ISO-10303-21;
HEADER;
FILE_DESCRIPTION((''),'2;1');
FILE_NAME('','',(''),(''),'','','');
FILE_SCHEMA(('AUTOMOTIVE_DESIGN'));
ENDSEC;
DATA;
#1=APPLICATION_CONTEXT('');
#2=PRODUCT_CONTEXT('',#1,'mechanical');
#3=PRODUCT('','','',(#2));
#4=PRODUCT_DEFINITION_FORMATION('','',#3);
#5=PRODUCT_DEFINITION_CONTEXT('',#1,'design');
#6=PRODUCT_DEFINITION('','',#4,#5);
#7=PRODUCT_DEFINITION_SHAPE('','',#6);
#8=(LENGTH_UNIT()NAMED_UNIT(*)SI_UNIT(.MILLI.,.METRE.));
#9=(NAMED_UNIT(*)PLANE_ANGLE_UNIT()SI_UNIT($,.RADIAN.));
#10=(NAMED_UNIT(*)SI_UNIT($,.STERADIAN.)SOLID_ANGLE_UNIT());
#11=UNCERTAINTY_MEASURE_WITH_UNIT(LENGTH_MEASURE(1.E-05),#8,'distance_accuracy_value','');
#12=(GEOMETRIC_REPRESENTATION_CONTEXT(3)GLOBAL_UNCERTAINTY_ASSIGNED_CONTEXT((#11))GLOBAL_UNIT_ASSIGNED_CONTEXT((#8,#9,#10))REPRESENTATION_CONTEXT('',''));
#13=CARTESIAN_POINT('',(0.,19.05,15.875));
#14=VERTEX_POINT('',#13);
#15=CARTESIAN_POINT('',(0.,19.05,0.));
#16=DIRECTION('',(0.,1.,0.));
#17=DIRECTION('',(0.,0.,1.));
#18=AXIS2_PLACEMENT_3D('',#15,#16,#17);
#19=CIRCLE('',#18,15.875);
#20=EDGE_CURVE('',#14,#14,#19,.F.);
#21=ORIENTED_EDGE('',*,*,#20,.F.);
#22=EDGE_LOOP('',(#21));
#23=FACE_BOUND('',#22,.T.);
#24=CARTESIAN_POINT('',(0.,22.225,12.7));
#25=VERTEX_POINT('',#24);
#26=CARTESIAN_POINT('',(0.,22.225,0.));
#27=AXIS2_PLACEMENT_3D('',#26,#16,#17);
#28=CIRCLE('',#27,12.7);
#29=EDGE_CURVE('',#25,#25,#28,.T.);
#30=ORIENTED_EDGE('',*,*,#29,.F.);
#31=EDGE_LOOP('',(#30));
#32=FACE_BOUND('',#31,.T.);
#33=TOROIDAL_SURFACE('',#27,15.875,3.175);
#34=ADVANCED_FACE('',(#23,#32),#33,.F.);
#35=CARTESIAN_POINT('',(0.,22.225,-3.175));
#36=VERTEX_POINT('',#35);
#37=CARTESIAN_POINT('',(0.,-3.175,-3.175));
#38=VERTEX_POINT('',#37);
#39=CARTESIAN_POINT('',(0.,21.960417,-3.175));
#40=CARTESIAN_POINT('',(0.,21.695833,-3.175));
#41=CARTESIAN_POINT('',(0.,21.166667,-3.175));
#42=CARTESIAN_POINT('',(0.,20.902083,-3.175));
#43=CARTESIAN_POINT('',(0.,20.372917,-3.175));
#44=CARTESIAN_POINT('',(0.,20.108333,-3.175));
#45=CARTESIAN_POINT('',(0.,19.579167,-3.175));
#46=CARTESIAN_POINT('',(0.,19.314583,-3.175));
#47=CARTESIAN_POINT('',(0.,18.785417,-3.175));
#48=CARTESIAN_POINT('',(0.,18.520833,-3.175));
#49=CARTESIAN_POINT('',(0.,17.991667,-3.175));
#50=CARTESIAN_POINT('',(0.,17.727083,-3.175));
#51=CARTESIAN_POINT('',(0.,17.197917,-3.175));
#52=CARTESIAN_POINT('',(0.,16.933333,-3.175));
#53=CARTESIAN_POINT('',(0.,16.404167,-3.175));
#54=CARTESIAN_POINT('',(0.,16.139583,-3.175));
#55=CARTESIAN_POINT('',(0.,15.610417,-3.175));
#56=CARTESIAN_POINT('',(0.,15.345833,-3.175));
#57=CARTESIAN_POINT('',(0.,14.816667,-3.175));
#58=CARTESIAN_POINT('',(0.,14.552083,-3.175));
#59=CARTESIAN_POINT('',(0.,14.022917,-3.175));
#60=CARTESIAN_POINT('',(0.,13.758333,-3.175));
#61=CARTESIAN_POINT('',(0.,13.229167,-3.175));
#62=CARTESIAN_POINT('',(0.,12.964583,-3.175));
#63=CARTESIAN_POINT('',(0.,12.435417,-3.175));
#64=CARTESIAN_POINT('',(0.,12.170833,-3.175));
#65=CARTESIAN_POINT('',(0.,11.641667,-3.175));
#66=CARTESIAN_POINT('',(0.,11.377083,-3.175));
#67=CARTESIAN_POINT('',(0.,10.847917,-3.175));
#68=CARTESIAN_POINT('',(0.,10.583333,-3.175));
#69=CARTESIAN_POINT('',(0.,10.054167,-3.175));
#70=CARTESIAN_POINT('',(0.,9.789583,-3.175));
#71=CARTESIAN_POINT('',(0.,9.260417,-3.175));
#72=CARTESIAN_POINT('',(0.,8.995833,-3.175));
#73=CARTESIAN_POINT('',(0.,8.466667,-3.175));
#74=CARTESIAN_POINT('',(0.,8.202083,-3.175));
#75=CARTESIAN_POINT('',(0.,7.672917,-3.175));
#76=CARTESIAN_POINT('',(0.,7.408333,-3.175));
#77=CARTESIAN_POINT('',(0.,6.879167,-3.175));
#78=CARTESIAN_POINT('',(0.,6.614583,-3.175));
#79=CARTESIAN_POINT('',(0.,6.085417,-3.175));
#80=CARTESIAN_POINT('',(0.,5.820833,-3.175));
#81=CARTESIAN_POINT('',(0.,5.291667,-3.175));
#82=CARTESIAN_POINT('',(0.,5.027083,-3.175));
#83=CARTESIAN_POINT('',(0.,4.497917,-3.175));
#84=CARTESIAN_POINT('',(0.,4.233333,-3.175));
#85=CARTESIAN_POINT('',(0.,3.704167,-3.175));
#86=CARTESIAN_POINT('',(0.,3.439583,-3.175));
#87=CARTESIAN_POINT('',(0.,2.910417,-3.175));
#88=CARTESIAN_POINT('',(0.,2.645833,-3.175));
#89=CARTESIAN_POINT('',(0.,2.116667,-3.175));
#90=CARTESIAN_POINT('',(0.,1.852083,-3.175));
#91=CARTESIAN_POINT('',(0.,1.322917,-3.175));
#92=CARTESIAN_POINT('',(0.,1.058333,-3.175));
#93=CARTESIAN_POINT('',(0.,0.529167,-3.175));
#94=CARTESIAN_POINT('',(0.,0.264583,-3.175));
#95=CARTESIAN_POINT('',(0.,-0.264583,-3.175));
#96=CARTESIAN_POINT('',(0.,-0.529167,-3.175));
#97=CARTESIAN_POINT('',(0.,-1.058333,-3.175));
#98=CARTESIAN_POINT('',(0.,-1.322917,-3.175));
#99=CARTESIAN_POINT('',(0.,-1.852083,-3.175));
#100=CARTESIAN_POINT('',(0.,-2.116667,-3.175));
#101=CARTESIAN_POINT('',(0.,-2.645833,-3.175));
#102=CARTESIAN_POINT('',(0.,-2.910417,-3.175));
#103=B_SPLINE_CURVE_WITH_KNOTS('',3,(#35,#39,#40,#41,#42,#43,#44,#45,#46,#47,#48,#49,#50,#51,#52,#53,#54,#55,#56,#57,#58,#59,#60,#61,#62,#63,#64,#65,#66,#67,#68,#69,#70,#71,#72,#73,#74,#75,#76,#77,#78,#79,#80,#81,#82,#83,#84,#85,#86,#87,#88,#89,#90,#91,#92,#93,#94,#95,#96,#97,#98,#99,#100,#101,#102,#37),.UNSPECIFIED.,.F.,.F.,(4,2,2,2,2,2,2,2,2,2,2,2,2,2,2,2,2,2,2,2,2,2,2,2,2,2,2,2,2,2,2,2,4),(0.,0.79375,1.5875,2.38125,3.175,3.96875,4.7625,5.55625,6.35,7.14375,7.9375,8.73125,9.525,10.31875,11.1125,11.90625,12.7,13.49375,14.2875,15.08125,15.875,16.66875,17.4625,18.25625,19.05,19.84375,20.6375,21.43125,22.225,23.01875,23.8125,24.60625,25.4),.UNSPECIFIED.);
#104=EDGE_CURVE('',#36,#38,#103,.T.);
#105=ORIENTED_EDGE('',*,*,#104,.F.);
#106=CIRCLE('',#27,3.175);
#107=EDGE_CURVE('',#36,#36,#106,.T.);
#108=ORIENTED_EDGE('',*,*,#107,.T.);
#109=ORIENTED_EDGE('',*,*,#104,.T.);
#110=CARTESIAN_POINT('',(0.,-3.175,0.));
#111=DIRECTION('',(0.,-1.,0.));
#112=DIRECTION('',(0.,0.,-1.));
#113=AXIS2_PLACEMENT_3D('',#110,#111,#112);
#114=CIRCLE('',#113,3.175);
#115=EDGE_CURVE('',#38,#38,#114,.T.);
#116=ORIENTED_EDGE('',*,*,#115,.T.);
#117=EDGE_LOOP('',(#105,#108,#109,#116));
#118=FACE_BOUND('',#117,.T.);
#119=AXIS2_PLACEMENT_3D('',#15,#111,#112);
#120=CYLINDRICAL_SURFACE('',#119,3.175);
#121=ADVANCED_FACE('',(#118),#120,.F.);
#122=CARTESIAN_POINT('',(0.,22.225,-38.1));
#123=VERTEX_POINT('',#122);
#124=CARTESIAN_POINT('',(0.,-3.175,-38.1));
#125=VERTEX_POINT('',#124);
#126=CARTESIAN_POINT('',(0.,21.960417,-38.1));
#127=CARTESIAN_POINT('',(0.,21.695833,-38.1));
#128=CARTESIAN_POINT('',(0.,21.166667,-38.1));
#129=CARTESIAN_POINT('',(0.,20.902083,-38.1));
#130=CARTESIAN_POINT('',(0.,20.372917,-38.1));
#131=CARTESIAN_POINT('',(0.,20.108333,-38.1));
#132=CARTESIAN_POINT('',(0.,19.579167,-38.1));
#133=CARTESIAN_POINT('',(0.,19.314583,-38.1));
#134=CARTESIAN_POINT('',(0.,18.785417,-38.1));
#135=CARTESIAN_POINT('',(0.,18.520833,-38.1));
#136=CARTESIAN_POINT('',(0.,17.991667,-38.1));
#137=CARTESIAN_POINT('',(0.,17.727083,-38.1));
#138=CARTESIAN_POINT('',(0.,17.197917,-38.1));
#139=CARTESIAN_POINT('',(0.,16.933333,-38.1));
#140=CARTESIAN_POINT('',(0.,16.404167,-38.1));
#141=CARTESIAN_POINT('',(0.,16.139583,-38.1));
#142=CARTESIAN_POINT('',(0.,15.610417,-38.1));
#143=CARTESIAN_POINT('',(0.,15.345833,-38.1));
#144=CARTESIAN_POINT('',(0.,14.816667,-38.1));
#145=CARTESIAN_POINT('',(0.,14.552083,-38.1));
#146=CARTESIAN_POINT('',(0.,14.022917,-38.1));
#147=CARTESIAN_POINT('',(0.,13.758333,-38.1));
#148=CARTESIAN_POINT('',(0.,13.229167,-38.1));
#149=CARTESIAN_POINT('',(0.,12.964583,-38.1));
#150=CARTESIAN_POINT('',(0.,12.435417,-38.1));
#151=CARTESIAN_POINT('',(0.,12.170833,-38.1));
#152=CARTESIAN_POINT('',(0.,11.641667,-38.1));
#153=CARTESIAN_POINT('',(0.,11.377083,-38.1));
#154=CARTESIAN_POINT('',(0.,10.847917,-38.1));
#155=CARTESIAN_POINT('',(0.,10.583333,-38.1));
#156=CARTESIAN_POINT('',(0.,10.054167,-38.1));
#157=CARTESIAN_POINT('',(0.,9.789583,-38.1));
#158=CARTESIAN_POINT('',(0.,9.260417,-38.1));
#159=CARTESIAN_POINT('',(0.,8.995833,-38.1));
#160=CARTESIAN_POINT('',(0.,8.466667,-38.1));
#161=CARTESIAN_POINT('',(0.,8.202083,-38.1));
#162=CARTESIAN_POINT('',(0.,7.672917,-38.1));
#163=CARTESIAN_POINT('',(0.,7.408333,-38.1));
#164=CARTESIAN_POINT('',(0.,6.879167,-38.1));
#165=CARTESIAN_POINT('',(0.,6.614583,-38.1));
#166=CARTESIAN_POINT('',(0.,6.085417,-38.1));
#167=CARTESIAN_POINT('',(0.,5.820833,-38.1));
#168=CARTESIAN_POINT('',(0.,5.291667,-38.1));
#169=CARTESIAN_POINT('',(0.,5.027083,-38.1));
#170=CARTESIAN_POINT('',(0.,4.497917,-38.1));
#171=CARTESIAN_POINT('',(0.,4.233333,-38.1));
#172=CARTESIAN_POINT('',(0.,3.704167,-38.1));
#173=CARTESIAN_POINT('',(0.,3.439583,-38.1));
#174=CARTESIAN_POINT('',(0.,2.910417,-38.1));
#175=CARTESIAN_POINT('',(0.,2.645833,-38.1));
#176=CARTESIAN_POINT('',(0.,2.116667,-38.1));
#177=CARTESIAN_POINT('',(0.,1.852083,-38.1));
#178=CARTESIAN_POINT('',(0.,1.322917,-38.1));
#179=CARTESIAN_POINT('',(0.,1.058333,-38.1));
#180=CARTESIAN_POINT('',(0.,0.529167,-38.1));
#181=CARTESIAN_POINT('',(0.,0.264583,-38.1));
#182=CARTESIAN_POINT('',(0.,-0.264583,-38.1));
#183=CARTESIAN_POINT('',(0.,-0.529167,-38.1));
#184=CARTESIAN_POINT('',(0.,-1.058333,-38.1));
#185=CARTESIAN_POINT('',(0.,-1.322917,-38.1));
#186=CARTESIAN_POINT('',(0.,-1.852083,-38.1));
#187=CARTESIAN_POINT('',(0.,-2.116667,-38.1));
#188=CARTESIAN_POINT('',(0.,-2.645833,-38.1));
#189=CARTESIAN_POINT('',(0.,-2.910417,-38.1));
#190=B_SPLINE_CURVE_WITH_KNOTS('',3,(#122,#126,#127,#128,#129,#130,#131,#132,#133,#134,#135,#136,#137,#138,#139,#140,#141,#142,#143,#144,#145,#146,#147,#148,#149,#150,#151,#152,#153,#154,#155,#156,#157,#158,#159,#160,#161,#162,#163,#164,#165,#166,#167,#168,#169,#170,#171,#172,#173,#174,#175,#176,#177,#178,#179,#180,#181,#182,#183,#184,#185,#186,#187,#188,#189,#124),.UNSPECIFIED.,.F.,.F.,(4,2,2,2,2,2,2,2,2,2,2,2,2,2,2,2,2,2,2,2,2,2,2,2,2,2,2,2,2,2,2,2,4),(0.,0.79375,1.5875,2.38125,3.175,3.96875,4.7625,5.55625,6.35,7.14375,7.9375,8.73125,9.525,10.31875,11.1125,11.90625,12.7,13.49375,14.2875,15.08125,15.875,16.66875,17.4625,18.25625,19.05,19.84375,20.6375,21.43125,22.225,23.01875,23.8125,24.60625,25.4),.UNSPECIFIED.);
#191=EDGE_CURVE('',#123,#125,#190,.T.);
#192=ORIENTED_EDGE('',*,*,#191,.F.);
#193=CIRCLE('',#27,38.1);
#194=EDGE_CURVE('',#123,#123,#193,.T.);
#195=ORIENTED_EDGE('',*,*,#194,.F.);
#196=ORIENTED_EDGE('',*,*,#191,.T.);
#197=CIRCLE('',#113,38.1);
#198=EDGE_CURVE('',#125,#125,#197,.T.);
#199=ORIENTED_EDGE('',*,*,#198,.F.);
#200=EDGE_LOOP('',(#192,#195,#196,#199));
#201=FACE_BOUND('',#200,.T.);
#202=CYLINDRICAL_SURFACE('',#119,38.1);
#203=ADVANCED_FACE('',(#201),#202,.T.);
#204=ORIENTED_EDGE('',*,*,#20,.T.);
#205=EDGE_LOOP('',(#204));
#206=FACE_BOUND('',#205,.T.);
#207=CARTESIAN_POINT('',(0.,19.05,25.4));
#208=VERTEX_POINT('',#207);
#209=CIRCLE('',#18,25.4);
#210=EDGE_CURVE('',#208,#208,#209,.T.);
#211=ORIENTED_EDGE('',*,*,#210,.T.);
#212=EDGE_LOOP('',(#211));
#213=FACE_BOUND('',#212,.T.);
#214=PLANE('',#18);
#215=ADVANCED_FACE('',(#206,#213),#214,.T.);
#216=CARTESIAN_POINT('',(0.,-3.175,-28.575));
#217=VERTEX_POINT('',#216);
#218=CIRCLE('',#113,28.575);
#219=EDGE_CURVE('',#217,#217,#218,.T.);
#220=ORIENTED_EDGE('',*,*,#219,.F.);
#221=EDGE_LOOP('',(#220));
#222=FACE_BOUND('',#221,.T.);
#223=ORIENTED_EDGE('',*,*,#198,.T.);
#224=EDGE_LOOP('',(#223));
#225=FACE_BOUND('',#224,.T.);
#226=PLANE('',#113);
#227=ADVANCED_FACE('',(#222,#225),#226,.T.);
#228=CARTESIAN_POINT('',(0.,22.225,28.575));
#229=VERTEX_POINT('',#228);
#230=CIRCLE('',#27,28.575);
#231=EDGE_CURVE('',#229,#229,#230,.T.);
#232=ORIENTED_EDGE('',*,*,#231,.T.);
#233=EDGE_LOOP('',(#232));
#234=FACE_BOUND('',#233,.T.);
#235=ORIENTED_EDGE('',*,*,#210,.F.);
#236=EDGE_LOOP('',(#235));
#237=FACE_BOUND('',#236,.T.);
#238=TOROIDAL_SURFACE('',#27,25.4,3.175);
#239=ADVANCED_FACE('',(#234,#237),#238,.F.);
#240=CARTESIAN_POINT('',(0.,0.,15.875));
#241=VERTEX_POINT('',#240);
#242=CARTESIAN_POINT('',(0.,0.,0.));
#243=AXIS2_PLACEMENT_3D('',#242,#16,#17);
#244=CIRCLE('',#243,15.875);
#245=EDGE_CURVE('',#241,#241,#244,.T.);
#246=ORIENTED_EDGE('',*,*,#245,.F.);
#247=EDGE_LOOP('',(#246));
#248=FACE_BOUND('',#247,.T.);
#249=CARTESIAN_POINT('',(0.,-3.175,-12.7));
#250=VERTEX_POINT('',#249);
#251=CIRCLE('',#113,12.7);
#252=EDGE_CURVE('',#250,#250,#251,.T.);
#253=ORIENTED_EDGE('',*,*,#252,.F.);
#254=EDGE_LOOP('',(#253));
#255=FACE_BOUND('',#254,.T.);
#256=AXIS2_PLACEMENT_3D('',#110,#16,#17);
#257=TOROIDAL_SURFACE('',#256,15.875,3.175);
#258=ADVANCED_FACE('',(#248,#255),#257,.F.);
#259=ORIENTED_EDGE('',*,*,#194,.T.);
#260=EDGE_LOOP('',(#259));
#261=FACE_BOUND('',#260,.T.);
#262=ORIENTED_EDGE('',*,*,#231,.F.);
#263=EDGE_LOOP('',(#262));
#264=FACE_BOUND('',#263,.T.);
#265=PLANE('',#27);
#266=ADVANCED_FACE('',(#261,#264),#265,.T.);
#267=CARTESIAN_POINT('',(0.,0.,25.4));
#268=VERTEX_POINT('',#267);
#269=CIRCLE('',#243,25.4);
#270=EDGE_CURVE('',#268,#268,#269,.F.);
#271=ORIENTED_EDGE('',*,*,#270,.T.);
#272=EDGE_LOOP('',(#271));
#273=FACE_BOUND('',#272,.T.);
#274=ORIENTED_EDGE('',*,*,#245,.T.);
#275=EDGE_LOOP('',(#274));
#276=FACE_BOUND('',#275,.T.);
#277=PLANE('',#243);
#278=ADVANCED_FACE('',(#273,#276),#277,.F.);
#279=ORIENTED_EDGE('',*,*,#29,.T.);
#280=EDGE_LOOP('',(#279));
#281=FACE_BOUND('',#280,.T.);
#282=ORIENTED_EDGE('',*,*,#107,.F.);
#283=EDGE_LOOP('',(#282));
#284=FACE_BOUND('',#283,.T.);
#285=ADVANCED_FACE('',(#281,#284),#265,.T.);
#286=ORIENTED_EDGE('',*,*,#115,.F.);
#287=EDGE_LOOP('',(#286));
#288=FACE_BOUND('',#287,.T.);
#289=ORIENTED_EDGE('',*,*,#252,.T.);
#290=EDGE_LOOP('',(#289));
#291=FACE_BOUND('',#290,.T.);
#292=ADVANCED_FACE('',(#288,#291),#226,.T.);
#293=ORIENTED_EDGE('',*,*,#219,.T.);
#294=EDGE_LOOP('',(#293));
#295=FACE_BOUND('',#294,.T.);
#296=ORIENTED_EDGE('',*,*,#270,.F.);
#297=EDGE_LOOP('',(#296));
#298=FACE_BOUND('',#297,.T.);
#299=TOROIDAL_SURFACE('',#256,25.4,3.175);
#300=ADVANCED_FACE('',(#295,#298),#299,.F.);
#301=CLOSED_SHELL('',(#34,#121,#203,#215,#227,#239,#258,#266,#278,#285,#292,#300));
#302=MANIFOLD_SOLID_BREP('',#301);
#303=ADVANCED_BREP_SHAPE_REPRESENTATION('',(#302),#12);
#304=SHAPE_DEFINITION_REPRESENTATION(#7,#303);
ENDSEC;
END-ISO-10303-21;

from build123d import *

# Parameters (mm, degrees)
SKETCH1_R           = 38.1
SKETCH1_R_2         = 3.175
BOSS_EXTRUDE1_DEPTH = 19.05
SKETCH2_R           = 38.1
SKETCH2_R_2         = 28.575
BOSS_EXTRUDE2_DEPTH = 3.175
BOSS_EXTRUDE3_START = 3.175
SKETCH3_R           = 38.1
SKETCH3_R_2         = 28.575
BOSS_EXTRUDE3_DEPTH = 3.175
SKETCH4_R           = 12.7
SKETCH4_R_2         = 3.175
BOSS_EXTRUDE4_DEPTH = 3.175
BOSS_EXTRUDE5_START = 3.175
SKETCH5_R           = 12.7
SKETCH5_R_2         = 3.175
BOSS_EXTRUDE5_DEPTH = 3.175
FILLET1_R           = 3.175


with BuildPart() as part:
    # Sketch1 → Boss-Extrude1 (new body)
    with BuildSketch(Plane(origin=(0, 0, 0), x_dir=(1, 0, 0), z_dir=(0, 1, 0))):
        with Locations(Location((0, 0, 0), (0, 0, 90))):
            Circle(SKETCH1_R)
        with Locations(Location((0, 0, 0), (0, 0, 90))):
            Circle(SKETCH1_R_2, mode=Mode.SUBTRACT)
    extrude(amount=BOSS_EXTRUDE1_DEPTH)

    # Sketch2 → Boss-Extrude2 (add)
    with BuildSketch(Plane(origin=(0, 19.05, 0), x_dir=(1, 0, 0), z_dir=(0, 1, 0))):
        with Locations(Location((0, 0, 0), (0, 0, 90))):
            Circle(SKETCH2_R)
        with Locations(Location((0, 0, 0), (0, 0, 270))):
            Circle(SKETCH2_R_2, mode=Mode.SUBTRACT)
    extrude(amount=BOSS_EXTRUDE2_DEPTH)

    # Sketch3 → Boss-Extrude3 (add)
    with BuildSketch(Plane.XZ.offset(BOSS_EXTRUDE3_START)):
        with Locations(Location((0, 0, 0), (0, 0, 270))):
            Circle(SKETCH3_R)
        with Locations(Location((0, 0, 0), (0, 0, 90))):
            Circle(SKETCH3_R_2, mode=Mode.SUBTRACT)
    extrude(amount=-BOSS_EXTRUDE3_DEPTH)

    # Sketch4 → Boss-Extrude4 (add)
    with BuildSketch(Plane(origin=(0, 19.05, 0), x_dir=(1, 0, 0), z_dir=(0, 1, 0))):
        with Locations(Location((0, 0, 0), (0, 0, 270))):
            Circle(SKETCH4_R)
        with Locations(Location((0, 0, 0), (0, 0, 90))):
            Circle(SKETCH4_R_2, mode=Mode.SUBTRACT)
    extrude(amount=BOSS_EXTRUDE4_DEPTH)

    # Sketch5 → Boss-Extrude5 (add)
    with BuildSketch(Plane.XZ.offset(BOSS_EXTRUDE5_START)):
        with Locations(Location((0, 0, 0), (0, 0, 90))):
            Circle(SKETCH5_R)
        with Locations(Location((0, 0, 0), (0, 0, 270))):
            Circle(SKETCH5_R_2, mode=Mode.SUBTRACT)
    extrude(amount=-BOSS_EXTRUDE5_DEPTH)

    # Fillet1
    fillet1_edges = [part.edges().sort_by_distance(p)[0] for p in [
        (0, 0, -28.575),
        (0, 19.05, -12.7),
        (0, 0, -12.7),
        (0, 19.05, -28.575),
    ]]
    fillet(fillet1_edges, radius=FILLET1_R - 0.0001)  # a hair under: the kernel refuses the full size


solid = part.part
